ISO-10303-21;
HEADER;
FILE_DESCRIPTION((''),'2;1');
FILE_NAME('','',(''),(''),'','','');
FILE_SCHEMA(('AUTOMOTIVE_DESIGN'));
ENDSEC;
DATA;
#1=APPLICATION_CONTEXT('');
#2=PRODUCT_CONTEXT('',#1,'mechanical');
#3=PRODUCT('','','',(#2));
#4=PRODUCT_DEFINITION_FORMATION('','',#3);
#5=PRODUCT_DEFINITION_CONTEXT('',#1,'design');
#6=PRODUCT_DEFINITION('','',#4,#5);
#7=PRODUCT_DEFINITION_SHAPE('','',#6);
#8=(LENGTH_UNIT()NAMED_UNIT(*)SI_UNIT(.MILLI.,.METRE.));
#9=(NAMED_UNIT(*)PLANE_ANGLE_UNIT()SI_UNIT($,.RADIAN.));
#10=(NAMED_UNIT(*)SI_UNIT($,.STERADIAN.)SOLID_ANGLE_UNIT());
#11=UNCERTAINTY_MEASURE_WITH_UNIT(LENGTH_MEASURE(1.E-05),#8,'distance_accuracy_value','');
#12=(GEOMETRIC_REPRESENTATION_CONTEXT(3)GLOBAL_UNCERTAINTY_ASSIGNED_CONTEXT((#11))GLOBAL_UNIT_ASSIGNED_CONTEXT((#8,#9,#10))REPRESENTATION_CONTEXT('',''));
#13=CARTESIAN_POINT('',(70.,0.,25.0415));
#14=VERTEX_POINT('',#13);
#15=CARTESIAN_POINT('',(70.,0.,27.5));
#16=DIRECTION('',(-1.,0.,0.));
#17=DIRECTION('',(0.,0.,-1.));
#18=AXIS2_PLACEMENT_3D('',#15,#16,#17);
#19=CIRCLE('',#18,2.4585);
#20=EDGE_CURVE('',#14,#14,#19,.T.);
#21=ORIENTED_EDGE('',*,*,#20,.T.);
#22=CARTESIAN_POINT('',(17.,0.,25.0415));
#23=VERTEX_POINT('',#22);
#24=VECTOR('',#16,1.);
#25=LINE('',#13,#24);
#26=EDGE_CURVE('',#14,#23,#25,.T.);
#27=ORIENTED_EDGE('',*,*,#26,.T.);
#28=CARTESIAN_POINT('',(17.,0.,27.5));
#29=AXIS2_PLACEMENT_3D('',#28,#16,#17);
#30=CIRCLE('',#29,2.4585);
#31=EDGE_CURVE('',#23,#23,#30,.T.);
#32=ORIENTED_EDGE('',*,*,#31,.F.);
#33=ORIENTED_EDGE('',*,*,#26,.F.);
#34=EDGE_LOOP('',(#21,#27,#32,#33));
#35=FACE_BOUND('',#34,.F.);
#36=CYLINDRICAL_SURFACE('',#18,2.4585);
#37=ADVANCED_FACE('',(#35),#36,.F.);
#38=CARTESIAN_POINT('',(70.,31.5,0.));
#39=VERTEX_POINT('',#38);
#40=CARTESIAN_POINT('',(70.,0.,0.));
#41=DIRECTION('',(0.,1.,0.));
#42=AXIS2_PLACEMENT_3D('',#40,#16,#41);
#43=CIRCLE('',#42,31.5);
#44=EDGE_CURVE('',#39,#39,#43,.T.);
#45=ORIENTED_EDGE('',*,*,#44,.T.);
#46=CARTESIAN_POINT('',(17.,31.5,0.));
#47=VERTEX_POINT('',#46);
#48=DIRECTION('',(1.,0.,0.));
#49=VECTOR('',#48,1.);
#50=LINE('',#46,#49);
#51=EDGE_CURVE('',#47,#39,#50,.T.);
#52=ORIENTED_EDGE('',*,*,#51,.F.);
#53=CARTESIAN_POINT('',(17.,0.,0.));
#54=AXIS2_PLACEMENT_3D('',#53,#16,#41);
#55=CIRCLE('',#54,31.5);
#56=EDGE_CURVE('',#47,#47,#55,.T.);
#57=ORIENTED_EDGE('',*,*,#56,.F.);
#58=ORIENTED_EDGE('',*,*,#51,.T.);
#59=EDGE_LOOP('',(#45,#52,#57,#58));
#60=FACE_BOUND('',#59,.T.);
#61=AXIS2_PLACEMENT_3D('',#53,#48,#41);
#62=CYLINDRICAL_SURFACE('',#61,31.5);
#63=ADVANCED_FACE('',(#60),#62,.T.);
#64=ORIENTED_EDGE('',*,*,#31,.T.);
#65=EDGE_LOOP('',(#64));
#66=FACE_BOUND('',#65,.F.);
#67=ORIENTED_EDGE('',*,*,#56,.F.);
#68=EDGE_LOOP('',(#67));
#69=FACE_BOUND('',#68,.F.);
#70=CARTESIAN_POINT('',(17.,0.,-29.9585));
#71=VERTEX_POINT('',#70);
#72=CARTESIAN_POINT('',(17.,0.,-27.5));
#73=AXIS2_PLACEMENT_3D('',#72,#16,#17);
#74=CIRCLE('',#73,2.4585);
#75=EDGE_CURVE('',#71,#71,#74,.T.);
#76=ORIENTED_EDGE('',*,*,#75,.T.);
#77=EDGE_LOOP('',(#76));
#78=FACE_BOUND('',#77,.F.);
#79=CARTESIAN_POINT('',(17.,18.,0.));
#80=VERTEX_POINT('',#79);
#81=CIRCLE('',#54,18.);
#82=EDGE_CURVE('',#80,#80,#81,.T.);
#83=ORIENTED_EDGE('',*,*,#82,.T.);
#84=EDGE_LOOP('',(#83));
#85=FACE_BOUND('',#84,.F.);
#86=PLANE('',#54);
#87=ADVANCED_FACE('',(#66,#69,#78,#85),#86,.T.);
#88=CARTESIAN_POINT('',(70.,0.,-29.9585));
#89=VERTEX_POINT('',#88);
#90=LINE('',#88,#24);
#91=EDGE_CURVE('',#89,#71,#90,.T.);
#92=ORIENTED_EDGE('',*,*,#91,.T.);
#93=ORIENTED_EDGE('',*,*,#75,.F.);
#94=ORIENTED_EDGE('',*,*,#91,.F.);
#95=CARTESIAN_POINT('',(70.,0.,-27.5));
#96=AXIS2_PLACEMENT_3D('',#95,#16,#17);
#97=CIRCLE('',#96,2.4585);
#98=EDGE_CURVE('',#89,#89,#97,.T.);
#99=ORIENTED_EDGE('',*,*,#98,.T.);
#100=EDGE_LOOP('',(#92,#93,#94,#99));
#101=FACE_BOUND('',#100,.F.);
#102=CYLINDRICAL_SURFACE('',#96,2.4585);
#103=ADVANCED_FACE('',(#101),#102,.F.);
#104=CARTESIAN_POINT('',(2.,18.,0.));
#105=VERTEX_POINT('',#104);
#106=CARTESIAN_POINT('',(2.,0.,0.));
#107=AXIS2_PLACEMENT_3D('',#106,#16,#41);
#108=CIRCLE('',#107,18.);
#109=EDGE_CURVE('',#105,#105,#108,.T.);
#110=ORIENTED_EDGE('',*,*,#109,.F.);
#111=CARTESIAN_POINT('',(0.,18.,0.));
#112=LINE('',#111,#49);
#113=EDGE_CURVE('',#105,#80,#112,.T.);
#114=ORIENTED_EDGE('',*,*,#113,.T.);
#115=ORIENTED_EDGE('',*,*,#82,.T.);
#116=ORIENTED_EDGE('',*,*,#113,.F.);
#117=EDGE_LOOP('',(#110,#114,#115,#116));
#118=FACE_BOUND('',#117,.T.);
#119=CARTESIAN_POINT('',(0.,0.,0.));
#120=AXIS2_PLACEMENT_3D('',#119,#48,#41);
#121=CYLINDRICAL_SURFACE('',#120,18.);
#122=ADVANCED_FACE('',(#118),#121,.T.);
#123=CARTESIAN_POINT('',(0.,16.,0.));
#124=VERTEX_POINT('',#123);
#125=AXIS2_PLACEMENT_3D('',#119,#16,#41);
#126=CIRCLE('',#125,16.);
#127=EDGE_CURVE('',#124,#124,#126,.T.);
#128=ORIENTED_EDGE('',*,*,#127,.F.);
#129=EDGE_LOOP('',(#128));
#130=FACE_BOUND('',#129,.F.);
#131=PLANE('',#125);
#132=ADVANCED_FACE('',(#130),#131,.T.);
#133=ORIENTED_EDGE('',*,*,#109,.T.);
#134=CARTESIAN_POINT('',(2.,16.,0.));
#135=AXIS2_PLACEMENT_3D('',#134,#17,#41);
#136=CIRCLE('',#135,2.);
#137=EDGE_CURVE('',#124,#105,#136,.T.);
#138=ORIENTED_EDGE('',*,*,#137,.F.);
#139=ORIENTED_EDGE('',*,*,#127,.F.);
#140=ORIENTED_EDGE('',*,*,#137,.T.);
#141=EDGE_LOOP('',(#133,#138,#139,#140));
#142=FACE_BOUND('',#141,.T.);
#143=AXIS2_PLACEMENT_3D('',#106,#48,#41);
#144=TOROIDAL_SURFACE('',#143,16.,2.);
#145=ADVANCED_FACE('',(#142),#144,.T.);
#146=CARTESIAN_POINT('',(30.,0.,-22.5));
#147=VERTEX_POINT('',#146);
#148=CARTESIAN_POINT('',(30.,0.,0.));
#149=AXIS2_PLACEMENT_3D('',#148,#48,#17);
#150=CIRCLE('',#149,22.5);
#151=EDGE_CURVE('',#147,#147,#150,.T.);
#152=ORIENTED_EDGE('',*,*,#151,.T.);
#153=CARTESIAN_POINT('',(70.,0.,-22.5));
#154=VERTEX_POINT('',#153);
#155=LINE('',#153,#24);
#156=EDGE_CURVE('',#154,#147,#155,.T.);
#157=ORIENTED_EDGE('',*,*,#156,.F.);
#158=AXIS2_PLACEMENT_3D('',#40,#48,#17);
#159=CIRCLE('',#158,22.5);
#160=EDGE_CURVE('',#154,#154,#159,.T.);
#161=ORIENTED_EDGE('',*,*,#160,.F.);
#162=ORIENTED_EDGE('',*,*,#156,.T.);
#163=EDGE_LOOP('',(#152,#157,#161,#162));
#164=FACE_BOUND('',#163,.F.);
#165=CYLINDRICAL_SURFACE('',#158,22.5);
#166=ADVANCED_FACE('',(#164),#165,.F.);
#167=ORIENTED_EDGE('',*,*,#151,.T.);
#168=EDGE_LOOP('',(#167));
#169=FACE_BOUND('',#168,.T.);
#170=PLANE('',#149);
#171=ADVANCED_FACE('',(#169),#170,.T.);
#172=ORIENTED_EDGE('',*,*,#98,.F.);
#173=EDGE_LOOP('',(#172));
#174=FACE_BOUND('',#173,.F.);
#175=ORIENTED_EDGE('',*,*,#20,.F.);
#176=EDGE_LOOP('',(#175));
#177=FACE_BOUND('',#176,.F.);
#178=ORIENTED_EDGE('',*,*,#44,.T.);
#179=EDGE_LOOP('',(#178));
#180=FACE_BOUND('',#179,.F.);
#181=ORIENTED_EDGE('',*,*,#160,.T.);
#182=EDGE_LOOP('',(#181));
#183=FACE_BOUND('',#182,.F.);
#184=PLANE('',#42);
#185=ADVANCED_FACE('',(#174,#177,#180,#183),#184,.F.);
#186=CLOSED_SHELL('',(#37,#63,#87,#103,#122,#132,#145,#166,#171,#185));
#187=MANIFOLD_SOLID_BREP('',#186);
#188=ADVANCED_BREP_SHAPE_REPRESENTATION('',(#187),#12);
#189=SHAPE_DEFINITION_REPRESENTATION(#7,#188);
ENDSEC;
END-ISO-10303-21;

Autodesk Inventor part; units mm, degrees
ref_plane "YZ Plane" through (0, 0, 0) normal (1, 0, 0) x (0, 1, 0)
ref_plane "XZ Plane" through (0, 0, 0) normal (0, 1, 0) x (-1, 0, 0)
ref_plane "XY Plane" through (0, 0, 0) normal (0, 0, 1) x (1, 0, 0)
sketch "Skizze1" plane through (0, 0, 0) normal (0, 0, 1) x (1, 0, 0)
  line L0 (0, 0) -> (0, 18)
  line L1 (0, 18) -> (17, 18)
  line L2 (17, 18) -> (17, 31.5)
  line L3 (17, 31.5) -> (70, 31.5)
  line L4 (70, 31.5) -> (70, 0)
  line L5 (70, 0) -> (0, 0)
  dimension "d0" = 70
  dimension "d1" = 36
  dimension "d2" = 17
  dimension "d3" = 63
revolve "Umdrehung1" add sketch "Skizze1" angle 360 about axis through (70, 0, 0) along (-1, 0, 0)
sketch "Skizze2" plane through (70, 0, 0) normal (1, 0, 0) x (0, 0, -1)
  circle A0 centre (0, 0) radius 22.5
  dimension "d5" = 45
extrude "Extrusion1" cut sketch "Skizze2" against normal blind 40
sketch "Skizze8" plane through (70, 0, 0) normal (1, 0, 0) x (0, 0, -1)
  line L0 (0, 0) -> (0, 31.8712) construction
  point P0 (-27.5, 0)
  point P1 (27.5, 0)
  dimension "d38" = 55
hole "Bohrung5" at (70, 0, 27.5) at (70, 0, -27.5) direction (-1, 0, 0) diameter 4.917 depth 53 thread size "M6x1" class "6H" standard "ISO Metric profile"
fillet "Rundung1" radius 2 1 edges at (0, -18, 0)
sketch "Skizze3" plane through (30, 0, 0) normal (1, 0, 0) x (0, 0, -1)
  line L0 (0, 0) -> (0, 13.1561) construction
  point P0 (-10, 0)
  point P1 (10, 0)
  dimension "d8" = 20
sketch "Skizze4" plane through (30, 0, 0) normal (1, 0, 0) x (0, 0, -1)
  circle A0 centre (10, 0) radius 2 projected
  point P0 (0, 0)
  point P1 (10, 0)
sketch "Skizze6" plane through (0, 0, 0) normal (-1, 0, 0) x (0, 0, 1)
  circle A0 centre (10, 0) radius 2 projected
  point P0 (0, 0)
  point P1 (10, 0)
sketch "Skizze5" plane through (0, 0, 0) normal (-1, 0, 0) x (0, 0, 1)
  circle A0 centre (-10, 0) radius 2 projected
  point P0 (0, 0)
  point P1 (-10, 0)
properties part number "Zylinder" material "Stahl, galvanisiert"
